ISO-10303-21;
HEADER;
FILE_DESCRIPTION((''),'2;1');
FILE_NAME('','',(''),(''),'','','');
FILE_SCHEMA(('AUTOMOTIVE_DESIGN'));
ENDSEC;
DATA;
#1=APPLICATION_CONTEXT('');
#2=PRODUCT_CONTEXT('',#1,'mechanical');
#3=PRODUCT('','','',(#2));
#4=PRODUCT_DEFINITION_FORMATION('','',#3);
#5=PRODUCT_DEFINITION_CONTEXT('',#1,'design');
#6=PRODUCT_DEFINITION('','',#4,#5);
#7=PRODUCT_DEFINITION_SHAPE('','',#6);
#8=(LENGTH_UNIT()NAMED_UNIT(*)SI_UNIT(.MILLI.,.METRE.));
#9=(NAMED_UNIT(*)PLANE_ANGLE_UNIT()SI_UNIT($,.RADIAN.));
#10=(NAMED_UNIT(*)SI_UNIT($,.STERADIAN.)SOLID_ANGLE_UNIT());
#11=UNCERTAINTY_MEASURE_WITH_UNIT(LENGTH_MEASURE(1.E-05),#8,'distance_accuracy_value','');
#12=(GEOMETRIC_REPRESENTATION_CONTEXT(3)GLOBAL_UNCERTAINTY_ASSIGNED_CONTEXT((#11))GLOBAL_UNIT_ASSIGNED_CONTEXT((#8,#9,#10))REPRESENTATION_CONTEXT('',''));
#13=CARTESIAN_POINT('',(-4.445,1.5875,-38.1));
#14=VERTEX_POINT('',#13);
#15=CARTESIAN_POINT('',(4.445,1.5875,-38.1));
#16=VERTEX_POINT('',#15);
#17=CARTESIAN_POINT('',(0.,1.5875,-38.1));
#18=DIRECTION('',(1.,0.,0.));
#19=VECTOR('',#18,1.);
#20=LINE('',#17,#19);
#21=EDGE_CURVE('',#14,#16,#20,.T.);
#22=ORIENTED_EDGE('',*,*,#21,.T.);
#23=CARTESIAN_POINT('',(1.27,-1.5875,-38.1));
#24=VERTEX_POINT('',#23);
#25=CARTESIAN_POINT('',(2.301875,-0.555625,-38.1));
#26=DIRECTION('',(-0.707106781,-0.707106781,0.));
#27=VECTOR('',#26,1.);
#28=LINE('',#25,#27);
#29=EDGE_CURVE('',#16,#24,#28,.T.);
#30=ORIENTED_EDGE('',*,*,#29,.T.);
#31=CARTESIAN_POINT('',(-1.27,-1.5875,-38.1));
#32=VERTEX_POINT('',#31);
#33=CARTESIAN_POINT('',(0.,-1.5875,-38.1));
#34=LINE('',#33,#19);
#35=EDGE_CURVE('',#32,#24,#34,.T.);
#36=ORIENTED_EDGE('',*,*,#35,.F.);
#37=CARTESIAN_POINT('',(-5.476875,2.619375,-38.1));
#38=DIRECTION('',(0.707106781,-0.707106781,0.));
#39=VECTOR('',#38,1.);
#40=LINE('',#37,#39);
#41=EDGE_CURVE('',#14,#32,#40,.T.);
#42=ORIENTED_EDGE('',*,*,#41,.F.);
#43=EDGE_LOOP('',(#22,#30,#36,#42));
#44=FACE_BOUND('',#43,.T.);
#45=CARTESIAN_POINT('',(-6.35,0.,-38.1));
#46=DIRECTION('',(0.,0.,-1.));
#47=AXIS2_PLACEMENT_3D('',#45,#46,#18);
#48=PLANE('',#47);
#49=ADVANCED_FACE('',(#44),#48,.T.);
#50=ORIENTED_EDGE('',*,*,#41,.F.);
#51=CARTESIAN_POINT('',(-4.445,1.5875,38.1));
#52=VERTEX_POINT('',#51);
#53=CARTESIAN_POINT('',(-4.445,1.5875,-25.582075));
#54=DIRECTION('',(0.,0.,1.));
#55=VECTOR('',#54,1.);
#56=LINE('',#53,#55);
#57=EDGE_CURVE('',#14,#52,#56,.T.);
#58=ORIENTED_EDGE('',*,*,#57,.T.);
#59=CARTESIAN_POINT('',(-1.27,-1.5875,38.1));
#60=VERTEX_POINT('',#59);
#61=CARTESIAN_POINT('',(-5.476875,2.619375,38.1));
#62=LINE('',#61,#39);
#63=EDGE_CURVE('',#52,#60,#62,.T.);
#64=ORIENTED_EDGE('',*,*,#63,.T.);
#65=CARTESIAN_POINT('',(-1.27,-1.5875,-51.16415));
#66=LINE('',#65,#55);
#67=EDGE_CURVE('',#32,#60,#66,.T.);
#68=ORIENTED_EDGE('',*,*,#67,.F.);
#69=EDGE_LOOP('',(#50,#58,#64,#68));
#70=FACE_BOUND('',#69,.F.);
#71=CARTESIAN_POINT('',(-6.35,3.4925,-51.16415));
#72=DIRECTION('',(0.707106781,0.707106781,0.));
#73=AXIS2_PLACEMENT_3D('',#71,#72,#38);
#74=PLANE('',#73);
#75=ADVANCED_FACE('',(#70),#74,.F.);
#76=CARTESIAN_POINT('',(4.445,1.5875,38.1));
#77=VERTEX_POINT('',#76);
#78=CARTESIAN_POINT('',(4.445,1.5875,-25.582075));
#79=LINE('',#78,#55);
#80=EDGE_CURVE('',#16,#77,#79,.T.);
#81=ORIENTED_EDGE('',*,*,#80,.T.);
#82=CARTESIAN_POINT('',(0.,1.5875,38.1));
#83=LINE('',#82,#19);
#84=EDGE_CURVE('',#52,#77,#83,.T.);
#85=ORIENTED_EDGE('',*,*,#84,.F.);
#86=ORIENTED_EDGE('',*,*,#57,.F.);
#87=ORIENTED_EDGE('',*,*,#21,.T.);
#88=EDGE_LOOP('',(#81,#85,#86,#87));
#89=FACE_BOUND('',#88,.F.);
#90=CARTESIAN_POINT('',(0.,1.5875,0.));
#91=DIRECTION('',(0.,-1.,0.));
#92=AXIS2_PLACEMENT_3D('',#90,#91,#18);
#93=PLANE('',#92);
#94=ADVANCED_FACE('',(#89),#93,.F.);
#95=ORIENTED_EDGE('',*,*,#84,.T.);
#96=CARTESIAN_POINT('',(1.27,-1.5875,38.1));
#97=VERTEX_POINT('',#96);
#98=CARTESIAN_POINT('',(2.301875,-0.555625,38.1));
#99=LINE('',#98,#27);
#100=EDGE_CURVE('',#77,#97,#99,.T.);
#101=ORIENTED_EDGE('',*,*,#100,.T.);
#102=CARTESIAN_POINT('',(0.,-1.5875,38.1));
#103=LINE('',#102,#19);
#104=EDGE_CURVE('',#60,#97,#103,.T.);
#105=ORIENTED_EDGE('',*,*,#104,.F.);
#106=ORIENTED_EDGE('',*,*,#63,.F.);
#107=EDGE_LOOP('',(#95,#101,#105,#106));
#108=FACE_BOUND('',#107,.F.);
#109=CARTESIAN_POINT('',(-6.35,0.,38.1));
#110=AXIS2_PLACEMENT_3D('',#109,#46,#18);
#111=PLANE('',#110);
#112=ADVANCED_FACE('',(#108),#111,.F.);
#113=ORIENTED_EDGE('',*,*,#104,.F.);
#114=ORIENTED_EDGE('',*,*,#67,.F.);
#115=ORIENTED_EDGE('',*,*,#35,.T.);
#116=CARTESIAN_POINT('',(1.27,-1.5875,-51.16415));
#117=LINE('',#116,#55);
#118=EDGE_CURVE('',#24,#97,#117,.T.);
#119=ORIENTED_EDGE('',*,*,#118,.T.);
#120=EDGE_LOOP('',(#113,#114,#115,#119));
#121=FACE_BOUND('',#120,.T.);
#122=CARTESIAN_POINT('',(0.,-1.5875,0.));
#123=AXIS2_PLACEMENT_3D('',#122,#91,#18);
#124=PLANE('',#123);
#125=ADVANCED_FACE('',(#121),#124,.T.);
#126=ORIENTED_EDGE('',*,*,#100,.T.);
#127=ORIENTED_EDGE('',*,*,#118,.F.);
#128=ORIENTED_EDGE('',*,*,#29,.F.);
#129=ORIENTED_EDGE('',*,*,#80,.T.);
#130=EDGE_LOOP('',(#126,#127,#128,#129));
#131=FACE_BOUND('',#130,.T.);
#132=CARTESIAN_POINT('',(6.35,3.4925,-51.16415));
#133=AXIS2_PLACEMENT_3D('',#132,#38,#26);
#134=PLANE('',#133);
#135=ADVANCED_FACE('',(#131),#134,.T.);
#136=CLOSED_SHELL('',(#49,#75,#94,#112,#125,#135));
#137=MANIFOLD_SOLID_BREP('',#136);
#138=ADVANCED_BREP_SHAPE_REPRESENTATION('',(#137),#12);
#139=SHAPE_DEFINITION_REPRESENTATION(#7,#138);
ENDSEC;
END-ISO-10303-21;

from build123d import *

# Parameters (mm, degrees)
F0_W        = 12.7
F0_H        = 76.2
F1_DEPTH    = 1.5875
F2_T1_DEPTH = 102.3282991577


# Not quite as in the source:
# - a fillet or chamfer that OpenCascade refuses, or shapes differently, is made with other operations: its cross-section is extruded or revolved along the edge and cut away or added


with BuildPart() as f1:
    # F0 (on Front) → F1 (new body, symmetric)
    with BuildSketch(Plane.XZ):
        Rectangle(F0_W, F0_H)
    extrude(amount=F1_DEPTH, both=True)

    # F2: chamfer of 5.08 on 2 edges, made by hand

    # F2_s2 → F2_t1 (cut)
    with BuildSketch(Plane.XY.offset(-51.1641495789)):
        Polygon((-6.35, 3.4925), (-1.27, -1.5875), (-6.35, -1.5875), align=None)
        Polygon((6.35, 3.4925), (1.27, -1.5875), (6.35, -1.5875), align=None)
    extrude(amount=F2_T1_DEPTH, mode=Mode.SUBTRACT)


solid = f1.part
